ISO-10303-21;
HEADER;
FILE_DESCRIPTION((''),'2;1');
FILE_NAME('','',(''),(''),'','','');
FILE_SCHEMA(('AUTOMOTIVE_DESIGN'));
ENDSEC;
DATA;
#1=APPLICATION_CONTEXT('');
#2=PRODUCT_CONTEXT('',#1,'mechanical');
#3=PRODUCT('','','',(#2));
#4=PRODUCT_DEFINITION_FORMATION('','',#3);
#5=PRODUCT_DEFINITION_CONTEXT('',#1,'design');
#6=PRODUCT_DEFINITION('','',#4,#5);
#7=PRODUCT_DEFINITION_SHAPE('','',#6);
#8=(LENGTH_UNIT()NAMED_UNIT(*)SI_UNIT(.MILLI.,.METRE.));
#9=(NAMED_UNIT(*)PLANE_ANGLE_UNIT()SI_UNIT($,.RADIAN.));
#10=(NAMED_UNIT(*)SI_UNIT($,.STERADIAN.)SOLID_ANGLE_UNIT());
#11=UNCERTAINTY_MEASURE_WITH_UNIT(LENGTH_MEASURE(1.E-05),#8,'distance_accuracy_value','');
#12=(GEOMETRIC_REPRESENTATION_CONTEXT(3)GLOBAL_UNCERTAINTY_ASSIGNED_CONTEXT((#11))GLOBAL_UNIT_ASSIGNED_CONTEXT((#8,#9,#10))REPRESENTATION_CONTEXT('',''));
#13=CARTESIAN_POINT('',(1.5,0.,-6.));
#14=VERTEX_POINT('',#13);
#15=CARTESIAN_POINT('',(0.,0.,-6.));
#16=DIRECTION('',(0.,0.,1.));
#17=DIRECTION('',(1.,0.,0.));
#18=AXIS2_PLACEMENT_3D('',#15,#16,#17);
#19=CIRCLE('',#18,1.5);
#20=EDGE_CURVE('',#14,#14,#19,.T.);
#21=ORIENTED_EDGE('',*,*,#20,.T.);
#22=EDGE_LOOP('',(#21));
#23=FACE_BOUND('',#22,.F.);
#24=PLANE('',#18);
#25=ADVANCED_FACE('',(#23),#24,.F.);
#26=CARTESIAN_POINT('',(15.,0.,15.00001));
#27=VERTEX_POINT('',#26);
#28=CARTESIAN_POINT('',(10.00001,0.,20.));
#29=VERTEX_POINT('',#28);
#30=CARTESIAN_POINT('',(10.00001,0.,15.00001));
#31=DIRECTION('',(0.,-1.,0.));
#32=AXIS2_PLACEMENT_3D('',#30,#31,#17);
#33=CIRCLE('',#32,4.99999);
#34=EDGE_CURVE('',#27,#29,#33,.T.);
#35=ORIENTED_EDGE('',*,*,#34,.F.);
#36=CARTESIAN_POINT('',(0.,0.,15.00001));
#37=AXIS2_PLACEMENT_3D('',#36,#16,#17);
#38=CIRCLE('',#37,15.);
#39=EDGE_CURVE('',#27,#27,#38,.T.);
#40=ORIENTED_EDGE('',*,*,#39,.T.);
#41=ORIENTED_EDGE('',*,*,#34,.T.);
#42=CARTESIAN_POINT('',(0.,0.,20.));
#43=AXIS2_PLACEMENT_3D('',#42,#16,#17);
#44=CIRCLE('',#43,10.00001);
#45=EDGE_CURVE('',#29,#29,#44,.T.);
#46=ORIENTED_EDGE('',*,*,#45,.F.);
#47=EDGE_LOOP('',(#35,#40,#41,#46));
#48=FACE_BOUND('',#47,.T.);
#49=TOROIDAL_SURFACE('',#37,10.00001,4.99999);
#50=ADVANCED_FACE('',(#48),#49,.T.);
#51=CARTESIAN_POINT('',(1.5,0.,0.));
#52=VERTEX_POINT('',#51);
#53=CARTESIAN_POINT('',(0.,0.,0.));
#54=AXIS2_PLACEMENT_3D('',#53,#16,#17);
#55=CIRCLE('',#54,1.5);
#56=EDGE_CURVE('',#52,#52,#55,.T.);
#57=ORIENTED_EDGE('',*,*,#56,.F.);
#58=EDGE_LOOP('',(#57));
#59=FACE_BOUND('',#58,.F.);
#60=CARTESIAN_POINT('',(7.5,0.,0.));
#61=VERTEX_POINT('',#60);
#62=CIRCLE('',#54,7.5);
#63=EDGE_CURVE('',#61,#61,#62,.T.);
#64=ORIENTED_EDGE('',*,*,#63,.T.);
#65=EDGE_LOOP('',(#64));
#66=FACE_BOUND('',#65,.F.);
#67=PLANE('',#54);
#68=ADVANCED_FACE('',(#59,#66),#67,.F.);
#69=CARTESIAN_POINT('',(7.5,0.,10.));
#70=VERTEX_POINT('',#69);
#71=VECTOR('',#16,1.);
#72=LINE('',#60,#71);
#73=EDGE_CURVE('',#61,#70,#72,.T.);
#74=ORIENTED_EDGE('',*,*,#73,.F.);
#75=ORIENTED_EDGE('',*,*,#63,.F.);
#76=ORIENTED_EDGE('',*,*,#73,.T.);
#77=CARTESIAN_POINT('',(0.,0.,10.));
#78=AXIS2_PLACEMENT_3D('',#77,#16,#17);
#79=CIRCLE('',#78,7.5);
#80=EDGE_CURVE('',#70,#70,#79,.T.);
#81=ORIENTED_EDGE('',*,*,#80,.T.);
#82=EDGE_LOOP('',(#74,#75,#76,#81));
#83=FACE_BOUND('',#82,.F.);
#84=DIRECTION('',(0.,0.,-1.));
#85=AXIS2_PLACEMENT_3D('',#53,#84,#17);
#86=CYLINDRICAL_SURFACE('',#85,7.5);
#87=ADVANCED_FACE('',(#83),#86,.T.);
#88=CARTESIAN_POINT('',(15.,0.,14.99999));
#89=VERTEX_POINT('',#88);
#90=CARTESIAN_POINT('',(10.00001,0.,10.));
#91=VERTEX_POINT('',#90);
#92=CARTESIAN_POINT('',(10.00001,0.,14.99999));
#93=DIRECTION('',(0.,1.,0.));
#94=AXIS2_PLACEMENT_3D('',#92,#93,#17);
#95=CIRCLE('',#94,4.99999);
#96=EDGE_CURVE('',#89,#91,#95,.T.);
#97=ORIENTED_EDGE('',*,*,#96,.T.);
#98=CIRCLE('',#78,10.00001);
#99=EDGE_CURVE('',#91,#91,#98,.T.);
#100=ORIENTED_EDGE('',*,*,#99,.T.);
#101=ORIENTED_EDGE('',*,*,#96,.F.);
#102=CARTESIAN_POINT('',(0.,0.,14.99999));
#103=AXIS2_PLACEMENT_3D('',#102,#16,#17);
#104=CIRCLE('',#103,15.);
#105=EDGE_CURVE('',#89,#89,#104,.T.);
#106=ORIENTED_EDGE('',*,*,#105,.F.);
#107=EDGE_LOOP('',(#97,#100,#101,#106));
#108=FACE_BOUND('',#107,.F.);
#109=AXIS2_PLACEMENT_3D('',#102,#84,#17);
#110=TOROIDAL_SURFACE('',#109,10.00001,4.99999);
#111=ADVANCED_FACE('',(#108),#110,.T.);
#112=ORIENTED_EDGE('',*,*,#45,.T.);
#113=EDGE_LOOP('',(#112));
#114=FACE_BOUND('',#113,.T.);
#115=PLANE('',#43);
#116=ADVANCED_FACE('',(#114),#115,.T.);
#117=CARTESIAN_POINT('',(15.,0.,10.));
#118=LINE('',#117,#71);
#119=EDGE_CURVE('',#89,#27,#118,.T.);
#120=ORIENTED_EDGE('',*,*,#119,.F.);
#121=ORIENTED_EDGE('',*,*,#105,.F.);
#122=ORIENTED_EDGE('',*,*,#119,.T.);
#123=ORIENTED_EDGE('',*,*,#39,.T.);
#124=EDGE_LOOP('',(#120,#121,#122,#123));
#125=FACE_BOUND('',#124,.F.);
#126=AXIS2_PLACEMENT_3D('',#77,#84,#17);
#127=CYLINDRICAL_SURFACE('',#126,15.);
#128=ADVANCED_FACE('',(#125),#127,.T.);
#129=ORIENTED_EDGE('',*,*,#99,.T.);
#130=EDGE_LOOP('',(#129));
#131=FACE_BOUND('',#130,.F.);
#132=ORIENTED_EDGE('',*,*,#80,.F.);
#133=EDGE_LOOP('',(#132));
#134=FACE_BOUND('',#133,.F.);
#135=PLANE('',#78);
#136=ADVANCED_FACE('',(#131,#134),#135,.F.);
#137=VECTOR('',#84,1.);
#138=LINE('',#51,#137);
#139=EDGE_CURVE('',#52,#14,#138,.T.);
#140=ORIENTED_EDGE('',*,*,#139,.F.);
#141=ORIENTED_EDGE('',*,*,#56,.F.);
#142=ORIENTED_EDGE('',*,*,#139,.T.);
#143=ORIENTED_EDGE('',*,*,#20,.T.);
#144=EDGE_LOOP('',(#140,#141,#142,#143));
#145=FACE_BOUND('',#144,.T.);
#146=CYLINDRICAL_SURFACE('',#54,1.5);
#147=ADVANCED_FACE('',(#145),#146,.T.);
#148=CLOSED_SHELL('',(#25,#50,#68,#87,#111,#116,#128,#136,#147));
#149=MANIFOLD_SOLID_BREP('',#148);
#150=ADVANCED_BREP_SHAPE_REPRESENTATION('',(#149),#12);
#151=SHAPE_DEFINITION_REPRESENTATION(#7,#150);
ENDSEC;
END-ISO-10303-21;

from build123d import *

# Parameters (mm, degrees)
F0_R     = 7.5
F0_R_2   = 1.5
F0_R_3   = 1
F1_DEPTH = 10
F2_DEPTH = 6
F3_R     = 15
F3_R_2   = 7.5
F4_DEPTH = 10
F5_R     = 4.99999


# Not quite as in the source:
# - a fillet or chamfer is up to 0.001 mm smaller than in the source, because OpenCascade refuses the exact size


with BuildPart() as f1:
    # F0 (on Top) → F1 (new body)
    with BuildSketch(Plane.XY):
        Circle(F0_R)
        Circle(F0_R_2, mode=Mode.SUBTRACT)
        Circle(F0_R_2)
        Circle(F0_R_3, mode=Mode.SUBTRACT)
        Circle(F0_R_3)
    extrude(amount=F1_DEPTH)

    # F0 (on Top) → F2 (join)
    with BuildSketch(Plane.XY):
        Circle(F0_R_2)
        Circle(F0_R_3, mode=Mode.SUBTRACT)
        Circle(F0_R_3)
    extrude(amount=-F2_DEPTH)

    # F3 (on face) → F4 (join)
    with BuildSketch(Plane.XY.offset(10)):
        Circle(F3_R)
        Circle(F3_R_2, mode=Mode.SUBTRACT)
        Circle(F3_R_2)
    extrude(amount=F4_DEPTH)

    # F5 (radius 5 in the source; OpenCascade refuses exactly that, so slightly less here)
    f5_edges = [f1.edges().sort_by_distance(p)[0] for p in [
        (15, 0, 15),
        (-15, 0, 10),
        (-15, 0, 20),
    ]]
    fillet(f5_edges, radius=F5_R)


solid = f1.part
